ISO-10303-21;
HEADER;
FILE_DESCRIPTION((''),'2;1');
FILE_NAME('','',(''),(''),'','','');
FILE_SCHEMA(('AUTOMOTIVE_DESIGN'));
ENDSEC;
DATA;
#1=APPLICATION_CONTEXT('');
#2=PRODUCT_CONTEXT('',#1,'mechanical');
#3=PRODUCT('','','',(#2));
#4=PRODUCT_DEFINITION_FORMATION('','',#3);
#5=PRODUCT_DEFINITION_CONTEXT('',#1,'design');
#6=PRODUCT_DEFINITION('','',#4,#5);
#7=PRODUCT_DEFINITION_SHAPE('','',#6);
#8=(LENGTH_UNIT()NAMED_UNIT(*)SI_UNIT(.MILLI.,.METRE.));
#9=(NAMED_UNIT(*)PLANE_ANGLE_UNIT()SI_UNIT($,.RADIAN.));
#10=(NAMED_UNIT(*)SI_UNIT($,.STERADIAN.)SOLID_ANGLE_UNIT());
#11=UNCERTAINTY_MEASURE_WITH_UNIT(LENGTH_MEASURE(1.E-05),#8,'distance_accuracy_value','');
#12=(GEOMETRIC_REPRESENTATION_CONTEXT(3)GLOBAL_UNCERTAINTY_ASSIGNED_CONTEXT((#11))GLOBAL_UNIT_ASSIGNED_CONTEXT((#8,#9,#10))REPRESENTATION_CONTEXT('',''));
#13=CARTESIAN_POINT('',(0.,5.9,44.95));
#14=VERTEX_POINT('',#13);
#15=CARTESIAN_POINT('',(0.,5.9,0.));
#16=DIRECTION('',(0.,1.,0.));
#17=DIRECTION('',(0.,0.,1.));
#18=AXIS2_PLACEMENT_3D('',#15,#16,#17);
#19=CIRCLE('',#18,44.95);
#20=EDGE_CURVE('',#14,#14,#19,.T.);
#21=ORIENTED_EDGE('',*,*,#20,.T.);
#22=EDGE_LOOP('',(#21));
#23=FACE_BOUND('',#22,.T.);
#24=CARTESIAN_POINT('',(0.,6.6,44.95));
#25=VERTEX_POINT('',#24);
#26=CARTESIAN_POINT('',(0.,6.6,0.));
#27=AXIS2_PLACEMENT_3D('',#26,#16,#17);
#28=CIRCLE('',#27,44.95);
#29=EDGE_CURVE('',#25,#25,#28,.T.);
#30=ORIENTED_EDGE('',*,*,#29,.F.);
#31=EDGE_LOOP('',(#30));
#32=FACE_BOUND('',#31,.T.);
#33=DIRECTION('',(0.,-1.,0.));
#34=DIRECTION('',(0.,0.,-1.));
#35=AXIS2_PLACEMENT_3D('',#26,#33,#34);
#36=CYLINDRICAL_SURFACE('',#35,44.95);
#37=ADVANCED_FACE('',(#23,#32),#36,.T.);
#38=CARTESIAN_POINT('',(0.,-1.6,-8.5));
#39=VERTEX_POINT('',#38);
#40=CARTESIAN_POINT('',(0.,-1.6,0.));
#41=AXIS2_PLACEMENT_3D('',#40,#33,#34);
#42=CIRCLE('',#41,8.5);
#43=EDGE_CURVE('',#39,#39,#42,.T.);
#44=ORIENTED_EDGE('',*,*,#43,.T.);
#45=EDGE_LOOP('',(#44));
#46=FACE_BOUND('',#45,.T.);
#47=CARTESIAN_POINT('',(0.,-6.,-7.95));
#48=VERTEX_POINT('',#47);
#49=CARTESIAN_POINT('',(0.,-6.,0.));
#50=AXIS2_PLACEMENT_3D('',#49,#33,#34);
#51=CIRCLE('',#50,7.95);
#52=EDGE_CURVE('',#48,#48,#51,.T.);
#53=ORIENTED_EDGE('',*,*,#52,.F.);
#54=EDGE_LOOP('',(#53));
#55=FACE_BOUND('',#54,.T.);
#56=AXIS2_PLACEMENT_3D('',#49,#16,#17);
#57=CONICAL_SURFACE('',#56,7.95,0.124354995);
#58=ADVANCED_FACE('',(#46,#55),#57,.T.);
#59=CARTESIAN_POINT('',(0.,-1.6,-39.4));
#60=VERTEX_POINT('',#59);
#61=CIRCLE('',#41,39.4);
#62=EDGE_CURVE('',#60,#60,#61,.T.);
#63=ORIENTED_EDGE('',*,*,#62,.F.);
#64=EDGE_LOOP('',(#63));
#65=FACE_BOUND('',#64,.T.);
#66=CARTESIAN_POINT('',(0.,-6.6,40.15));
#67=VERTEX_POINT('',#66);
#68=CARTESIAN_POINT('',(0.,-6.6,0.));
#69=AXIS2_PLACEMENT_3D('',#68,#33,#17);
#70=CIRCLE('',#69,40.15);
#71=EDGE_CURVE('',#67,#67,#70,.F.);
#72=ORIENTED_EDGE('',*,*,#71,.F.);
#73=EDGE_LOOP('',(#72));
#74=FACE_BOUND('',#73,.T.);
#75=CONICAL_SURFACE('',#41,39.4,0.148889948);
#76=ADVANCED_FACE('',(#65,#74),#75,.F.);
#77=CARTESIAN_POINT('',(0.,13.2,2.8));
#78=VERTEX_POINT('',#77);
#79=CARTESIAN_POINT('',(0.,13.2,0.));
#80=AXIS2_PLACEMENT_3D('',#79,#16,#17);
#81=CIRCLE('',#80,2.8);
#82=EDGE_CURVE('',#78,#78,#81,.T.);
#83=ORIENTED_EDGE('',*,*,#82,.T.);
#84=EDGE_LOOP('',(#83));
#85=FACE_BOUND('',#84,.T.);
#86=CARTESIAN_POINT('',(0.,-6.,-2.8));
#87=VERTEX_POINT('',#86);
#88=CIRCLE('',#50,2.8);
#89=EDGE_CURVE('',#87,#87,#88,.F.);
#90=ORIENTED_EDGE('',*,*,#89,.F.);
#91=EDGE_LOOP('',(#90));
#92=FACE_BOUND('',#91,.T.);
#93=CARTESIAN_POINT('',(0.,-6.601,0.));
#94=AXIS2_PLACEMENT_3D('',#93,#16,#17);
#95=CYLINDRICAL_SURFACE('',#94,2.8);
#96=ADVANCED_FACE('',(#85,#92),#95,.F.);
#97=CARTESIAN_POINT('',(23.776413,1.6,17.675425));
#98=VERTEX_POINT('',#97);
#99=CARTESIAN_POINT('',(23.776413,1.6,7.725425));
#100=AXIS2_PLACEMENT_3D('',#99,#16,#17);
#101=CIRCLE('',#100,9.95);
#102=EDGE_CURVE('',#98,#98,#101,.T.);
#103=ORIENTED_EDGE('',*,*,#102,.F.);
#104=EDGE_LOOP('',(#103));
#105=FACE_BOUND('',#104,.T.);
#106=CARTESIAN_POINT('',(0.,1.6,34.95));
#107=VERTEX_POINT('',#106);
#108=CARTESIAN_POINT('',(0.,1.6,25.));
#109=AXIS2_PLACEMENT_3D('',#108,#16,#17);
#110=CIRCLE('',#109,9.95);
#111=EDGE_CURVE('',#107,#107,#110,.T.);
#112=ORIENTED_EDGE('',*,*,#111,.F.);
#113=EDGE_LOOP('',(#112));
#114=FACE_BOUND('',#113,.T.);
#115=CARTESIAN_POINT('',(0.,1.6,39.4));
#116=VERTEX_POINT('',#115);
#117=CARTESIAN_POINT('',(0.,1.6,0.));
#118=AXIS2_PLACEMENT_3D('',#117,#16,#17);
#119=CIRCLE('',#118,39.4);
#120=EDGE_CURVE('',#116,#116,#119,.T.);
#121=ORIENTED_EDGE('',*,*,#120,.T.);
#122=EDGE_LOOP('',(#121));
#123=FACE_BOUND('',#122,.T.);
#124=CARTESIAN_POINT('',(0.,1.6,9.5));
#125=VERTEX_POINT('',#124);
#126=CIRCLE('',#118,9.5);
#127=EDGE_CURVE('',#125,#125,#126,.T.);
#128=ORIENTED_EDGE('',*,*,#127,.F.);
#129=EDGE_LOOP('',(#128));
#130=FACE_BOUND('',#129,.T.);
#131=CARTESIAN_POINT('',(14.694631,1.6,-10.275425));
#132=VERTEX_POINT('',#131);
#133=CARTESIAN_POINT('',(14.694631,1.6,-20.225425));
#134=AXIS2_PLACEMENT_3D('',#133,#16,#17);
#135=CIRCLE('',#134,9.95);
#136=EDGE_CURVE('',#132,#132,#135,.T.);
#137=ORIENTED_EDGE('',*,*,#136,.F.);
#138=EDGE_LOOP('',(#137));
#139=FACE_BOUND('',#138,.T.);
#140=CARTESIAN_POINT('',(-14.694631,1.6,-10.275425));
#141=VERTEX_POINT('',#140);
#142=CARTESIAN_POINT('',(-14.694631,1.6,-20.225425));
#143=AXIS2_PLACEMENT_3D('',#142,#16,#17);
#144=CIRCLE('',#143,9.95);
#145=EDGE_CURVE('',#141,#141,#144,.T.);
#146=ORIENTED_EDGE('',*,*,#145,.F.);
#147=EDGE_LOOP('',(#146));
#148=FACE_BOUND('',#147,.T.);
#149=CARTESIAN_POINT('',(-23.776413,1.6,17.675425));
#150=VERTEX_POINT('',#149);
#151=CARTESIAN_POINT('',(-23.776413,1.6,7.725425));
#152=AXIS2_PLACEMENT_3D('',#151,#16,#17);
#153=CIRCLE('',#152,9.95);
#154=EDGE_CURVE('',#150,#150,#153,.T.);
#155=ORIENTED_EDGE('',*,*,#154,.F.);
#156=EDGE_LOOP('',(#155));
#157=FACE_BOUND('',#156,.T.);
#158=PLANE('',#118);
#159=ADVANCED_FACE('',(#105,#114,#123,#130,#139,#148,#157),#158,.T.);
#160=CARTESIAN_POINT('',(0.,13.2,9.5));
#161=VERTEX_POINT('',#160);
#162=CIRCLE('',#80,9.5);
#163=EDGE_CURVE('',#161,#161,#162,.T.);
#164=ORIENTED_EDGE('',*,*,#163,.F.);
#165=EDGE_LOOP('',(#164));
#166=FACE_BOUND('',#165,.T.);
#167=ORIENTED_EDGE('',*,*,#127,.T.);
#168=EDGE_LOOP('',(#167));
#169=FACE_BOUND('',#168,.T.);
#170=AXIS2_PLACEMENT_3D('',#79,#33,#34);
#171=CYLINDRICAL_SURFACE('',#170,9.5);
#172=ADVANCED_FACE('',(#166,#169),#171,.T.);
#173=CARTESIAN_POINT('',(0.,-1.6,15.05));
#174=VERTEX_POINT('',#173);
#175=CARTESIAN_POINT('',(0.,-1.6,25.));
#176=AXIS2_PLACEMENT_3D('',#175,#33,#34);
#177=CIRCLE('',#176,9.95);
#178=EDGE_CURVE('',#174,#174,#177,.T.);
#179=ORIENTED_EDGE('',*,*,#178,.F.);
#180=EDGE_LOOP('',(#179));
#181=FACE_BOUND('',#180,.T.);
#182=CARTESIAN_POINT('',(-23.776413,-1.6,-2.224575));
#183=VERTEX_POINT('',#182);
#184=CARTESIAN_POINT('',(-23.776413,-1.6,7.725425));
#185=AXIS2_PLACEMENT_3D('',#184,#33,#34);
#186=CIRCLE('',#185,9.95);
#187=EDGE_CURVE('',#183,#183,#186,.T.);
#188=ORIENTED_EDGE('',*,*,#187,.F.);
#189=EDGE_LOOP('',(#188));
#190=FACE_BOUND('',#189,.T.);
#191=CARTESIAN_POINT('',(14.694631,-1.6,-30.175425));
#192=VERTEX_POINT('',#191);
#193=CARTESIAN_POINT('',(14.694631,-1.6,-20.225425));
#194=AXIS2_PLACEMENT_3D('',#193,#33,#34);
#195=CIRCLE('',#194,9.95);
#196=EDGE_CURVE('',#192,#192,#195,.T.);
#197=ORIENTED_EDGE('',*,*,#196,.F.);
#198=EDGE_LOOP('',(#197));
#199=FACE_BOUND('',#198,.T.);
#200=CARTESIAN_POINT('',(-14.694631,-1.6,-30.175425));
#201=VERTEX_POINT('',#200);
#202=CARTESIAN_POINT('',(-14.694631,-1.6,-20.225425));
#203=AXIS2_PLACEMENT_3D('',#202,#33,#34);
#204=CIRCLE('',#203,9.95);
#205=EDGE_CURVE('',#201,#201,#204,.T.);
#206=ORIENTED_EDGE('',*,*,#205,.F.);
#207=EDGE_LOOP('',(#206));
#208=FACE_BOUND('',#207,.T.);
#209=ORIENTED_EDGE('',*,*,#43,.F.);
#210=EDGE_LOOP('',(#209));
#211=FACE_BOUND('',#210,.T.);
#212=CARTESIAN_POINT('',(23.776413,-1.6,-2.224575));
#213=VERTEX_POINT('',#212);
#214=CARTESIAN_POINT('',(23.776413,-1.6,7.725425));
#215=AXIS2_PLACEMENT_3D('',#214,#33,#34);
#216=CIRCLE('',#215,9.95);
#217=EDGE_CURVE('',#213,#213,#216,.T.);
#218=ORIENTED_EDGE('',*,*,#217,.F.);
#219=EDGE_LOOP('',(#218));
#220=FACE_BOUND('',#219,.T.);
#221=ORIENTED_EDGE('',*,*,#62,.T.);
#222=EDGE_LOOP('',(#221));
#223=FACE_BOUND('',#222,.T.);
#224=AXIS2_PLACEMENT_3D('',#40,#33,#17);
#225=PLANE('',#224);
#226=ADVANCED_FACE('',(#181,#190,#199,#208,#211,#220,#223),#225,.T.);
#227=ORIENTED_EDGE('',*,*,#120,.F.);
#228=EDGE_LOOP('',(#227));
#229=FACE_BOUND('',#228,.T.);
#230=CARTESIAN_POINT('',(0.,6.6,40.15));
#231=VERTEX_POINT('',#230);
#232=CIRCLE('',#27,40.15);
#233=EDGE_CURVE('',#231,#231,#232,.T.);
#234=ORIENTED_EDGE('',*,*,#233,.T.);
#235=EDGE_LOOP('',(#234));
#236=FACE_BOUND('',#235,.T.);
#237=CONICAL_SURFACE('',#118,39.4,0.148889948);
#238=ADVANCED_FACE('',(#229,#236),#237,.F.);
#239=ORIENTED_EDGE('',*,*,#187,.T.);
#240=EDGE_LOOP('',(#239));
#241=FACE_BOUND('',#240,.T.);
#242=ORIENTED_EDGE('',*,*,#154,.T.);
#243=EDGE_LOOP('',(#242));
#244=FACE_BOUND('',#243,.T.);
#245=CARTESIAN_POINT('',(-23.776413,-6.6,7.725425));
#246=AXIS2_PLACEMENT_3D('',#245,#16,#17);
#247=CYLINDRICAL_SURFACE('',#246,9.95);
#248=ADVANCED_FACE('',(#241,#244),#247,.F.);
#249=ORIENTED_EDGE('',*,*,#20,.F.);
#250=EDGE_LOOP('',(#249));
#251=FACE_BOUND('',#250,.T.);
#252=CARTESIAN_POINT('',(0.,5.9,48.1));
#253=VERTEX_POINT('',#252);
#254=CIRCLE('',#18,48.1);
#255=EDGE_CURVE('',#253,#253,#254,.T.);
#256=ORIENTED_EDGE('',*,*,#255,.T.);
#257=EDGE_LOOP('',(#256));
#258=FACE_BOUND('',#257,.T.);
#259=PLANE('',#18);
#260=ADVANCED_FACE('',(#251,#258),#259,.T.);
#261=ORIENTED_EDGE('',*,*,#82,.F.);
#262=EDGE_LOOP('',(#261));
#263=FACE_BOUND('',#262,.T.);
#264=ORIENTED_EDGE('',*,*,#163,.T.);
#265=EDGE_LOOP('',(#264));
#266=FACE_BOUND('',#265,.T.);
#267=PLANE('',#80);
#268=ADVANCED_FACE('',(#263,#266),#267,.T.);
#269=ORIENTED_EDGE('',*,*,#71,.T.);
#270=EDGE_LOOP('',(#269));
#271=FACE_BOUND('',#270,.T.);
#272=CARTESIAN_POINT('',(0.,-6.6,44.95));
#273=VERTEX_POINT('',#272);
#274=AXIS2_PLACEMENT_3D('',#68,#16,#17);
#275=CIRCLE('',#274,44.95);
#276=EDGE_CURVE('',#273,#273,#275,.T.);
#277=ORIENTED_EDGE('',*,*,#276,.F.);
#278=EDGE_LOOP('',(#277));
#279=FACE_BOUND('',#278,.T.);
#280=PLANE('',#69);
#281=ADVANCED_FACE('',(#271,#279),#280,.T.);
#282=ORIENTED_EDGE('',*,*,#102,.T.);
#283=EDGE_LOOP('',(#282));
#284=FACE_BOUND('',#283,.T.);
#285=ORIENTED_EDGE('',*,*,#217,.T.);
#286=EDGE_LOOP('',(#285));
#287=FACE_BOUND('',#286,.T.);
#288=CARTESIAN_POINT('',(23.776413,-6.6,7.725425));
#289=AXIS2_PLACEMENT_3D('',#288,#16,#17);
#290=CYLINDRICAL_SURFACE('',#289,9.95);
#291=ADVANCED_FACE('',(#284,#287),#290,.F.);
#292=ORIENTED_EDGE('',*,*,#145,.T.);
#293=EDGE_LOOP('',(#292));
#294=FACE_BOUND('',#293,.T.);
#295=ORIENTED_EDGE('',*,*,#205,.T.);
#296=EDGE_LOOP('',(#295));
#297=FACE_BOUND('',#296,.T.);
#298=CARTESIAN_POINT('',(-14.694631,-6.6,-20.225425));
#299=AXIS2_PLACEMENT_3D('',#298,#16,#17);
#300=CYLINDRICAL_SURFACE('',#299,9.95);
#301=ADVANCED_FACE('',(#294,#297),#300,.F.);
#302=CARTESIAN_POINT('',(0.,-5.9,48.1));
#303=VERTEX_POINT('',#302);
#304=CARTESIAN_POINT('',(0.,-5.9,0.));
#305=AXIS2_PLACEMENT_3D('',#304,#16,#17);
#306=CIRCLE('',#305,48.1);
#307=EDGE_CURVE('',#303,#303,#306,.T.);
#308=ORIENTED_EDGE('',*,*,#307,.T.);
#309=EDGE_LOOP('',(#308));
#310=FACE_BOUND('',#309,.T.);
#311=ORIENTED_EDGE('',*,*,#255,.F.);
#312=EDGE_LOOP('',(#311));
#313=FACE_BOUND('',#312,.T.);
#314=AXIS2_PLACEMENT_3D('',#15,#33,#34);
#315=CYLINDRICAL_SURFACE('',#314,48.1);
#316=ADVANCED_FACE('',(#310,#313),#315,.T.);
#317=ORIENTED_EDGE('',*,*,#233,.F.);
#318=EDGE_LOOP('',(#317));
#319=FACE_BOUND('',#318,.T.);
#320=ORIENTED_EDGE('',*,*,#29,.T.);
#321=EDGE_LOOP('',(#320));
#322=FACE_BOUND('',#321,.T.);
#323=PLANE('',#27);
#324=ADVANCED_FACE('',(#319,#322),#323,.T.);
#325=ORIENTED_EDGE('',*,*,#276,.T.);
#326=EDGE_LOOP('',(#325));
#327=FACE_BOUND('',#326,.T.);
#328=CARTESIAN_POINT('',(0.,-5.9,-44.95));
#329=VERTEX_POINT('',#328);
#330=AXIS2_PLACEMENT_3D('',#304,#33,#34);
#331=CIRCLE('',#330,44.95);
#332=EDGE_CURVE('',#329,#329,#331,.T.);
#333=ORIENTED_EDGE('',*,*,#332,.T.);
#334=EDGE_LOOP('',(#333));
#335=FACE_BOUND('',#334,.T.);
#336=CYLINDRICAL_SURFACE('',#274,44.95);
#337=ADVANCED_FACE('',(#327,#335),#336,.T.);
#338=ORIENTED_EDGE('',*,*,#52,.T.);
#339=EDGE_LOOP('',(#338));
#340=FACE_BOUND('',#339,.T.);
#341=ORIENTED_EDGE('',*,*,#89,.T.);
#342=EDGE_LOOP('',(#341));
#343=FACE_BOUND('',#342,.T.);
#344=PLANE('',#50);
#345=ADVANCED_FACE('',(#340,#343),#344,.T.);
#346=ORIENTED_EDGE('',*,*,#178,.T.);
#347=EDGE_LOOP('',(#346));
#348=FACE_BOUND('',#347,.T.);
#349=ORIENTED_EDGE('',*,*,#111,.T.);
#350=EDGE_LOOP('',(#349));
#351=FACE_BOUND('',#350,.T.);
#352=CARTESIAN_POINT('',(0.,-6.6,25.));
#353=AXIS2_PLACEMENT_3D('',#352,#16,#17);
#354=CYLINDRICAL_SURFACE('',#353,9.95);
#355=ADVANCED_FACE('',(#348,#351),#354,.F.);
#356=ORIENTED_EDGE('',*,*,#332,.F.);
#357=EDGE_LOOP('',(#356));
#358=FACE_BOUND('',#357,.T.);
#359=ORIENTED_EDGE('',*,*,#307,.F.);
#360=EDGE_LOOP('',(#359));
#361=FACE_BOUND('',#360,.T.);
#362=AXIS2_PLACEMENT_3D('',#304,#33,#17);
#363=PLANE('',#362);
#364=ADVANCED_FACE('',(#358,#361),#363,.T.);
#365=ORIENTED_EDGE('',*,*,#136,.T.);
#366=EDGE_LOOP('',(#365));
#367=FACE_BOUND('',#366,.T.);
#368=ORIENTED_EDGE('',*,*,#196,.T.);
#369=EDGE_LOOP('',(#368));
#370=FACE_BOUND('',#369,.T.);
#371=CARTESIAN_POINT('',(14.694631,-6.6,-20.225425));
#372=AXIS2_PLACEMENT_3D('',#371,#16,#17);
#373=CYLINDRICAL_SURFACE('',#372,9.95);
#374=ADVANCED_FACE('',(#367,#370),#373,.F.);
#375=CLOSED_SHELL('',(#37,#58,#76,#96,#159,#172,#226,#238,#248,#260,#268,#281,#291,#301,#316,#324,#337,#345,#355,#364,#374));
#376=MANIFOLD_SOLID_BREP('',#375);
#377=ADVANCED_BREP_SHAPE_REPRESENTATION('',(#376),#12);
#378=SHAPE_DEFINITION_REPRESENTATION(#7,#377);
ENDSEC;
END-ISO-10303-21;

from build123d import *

# Parameters (mm, degrees)
SKETCH1_R           = 48.1
BOSS_EXTRUDE2_DEPTH = 5.9
SKETCH2_R           = 44.95
BOSS_EXTRUDE3_DEPTH = 0.7
SKETCH5_R           = 40.15
CUT_EXTRUDE1_DEPTH  = 5
SKETCH8_R           = 9.95
CUT_EXTRUDE2_DEPTH  = 69.516129488
SKETCH8_4_R         = 9.5
BOSS_EXTRUDE4_DEPTH = 11.6
SKETCH9_R           = 8.5
SKETCH10_R          = 7.95
CUT_EXTRUDE3_REACH  = 72.847
SKETCH11_R          = 2.8


# Read off the part's stored shape, not the designer's step: Loft2, Loft3
with BuildPart() as part:
    # Sketch1 → Boss-Extrude2 (new body)
    with BuildSketch(Plane(origin=(0, 0, 0), x_dir=(1, 0, 0), z_dir=(0, 1, 0))):
        with Locations(Location((0, 0, 0), (0, 0, 270))):
            Circle(SKETCH1_R)
    boss_extrude2 = extrude(amount=BOSS_EXTRUDE2_DEPTH)

    # Sketch2 → Boss-Extrude3 (add)
    with BuildSketch(Plane(origin=(0, 5.9, 0), x_dir=(1, 0, 0), z_dir=(0, 1, 0))):
        with Locations(Location((0, 0, 0), (0, 0, 270))):
            Circle(SKETCH2_R)
    boss_extrude3 = extrude(amount=BOSS_EXTRUDE3_DEPTH)

    # Sketch5 → Cut-Extrude1 (cut)
    with BuildSketch(Plane(origin=(0, 6.6, 0), x_dir=(1, 0, 0), z_dir=(0, 1, 0))):
        with Locations(Location((0, 0, 0), (0, 0, 270))):
            Circle(SKETCH5_R)
    cut_extrude1 = extrude(amount=-CUT_EXTRUDE1_DEPTH, mode=Mode.SUBTRACT)

    # Loft2 outline → Loft2 (revolve)
    with BuildSketch(Plane.XY):
        Polygon((40.15, 6.6), (39.4, 1.6), (40.15, 1.6), align=None)
    revolve(axis=Axis((0, 0, 0), (0, 1, 0)))

    # Mirror2: Boss-Extrude2, Boss-Extrude3, Cut-Extrude1 across Top Plane
    add(boss_extrude2.mirror(Plane(origin=(0, 0, 0), x_dir=(1, 0, 0), z_dir=(0, 1, 0))))
    add(boss_extrude3.mirror(Plane(origin=(0, 0, 0), x_dir=(1, 0, 0), z_dir=(0, 1, 0))))
    add(cut_extrude1.mirror(Plane(origin=(0, 0, 0), x_dir=(1, 0, 0), z_dir=(0, 1, 0))), mode=Mode.SUBTRACT)

    # Loft3 outline → Loft3 (revolve)
    with BuildSketch(Plane.XY):
        Polygon((40.15, -1.6), (39.4, -1.6), (40.15, -6.6), align=None)
    revolve(axis=Axis((0, 0, 0), (0, 1, 0)))

    # Sketch8 → Cut-Extrude2 (cut, through all)
    with BuildSketch(Plane(origin=(0, 1.6, 0), x_dir=(1, 0, 0), z_dir=(0, 1, 0))):
        with Locations(Location((0, -25, 0), (0, 0, 270))):
            Circle(SKETCH8_R)
        with Locations(Location((-23.776412907, -7.725424859, 0), (0, 0, 270))):
            Circle(SKETCH8_R)
        with Locations(Location((-14.694631307, 20.225424859, 0), (0, 0, 270))):
            Circle(SKETCH8_R)
        with Locations(Location((14.694631307, 20.225424859, 0), (0, 0, 270))):
            Circle(SKETCH8_R)
        with Locations(Location((23.776412907, -7.725424859, 0), (0, 0, 270))):
            Circle(SKETCH8_R)
    extrude(amount=-CUT_EXTRUDE2_DEPTH, mode=Mode.SUBTRACT)

    # Sketch8<4> → Boss-Extrude4 (add)
    with BuildSketch(Plane(origin=(0, 1.6, 0), x_dir=(1, 0, 0), z_dir=(0, 1, 0))):
        with Locations(Location((0, 0, 0), (0, 0, 270))):
            Circle(SKETCH8_4_R)
    extrude(amount=BOSS_EXTRUDE4_DEPTH)

    # Sketch9 → Loft4 section 0
    with BuildSketch(Plane.XZ.offset(1.6)):
        Circle(SKETCH9_R)
    # Sketch10 → Loft4 section 1
    with BuildSketch(Plane(origin=(0, -6, 0), x_dir=(-1, 0, 0), z_dir=(0, -1, 0))):
        Circle(SKETCH10_R)
    loft()

    # Sketch11 → Cut-Extrude3 (cut, up to next)
    with BuildSketch(Plane(origin=(0, 13.2, 0), x_dir=(1, 0, 0), z_dir=(0, 1, 0)), mode=Mode.PRIVATE) as cut_extrude3_sk1:
        with Locations(Location((0, 0, 0), (0, 0, 270))):
            Circle(SKETCH11_R)
    cut_extrude3_tool1 = extrude(cut_extrude3_sk1.sketch, amount=-CUT_EXTRUDE3_REACH, mode=Mode.PRIVATE) & part.part
    add(cut_extrude3_tool1.solids().sort_by_distance((0, 13.2, 0))[0], mode=Mode.SUBTRACT)


solid = part.part
